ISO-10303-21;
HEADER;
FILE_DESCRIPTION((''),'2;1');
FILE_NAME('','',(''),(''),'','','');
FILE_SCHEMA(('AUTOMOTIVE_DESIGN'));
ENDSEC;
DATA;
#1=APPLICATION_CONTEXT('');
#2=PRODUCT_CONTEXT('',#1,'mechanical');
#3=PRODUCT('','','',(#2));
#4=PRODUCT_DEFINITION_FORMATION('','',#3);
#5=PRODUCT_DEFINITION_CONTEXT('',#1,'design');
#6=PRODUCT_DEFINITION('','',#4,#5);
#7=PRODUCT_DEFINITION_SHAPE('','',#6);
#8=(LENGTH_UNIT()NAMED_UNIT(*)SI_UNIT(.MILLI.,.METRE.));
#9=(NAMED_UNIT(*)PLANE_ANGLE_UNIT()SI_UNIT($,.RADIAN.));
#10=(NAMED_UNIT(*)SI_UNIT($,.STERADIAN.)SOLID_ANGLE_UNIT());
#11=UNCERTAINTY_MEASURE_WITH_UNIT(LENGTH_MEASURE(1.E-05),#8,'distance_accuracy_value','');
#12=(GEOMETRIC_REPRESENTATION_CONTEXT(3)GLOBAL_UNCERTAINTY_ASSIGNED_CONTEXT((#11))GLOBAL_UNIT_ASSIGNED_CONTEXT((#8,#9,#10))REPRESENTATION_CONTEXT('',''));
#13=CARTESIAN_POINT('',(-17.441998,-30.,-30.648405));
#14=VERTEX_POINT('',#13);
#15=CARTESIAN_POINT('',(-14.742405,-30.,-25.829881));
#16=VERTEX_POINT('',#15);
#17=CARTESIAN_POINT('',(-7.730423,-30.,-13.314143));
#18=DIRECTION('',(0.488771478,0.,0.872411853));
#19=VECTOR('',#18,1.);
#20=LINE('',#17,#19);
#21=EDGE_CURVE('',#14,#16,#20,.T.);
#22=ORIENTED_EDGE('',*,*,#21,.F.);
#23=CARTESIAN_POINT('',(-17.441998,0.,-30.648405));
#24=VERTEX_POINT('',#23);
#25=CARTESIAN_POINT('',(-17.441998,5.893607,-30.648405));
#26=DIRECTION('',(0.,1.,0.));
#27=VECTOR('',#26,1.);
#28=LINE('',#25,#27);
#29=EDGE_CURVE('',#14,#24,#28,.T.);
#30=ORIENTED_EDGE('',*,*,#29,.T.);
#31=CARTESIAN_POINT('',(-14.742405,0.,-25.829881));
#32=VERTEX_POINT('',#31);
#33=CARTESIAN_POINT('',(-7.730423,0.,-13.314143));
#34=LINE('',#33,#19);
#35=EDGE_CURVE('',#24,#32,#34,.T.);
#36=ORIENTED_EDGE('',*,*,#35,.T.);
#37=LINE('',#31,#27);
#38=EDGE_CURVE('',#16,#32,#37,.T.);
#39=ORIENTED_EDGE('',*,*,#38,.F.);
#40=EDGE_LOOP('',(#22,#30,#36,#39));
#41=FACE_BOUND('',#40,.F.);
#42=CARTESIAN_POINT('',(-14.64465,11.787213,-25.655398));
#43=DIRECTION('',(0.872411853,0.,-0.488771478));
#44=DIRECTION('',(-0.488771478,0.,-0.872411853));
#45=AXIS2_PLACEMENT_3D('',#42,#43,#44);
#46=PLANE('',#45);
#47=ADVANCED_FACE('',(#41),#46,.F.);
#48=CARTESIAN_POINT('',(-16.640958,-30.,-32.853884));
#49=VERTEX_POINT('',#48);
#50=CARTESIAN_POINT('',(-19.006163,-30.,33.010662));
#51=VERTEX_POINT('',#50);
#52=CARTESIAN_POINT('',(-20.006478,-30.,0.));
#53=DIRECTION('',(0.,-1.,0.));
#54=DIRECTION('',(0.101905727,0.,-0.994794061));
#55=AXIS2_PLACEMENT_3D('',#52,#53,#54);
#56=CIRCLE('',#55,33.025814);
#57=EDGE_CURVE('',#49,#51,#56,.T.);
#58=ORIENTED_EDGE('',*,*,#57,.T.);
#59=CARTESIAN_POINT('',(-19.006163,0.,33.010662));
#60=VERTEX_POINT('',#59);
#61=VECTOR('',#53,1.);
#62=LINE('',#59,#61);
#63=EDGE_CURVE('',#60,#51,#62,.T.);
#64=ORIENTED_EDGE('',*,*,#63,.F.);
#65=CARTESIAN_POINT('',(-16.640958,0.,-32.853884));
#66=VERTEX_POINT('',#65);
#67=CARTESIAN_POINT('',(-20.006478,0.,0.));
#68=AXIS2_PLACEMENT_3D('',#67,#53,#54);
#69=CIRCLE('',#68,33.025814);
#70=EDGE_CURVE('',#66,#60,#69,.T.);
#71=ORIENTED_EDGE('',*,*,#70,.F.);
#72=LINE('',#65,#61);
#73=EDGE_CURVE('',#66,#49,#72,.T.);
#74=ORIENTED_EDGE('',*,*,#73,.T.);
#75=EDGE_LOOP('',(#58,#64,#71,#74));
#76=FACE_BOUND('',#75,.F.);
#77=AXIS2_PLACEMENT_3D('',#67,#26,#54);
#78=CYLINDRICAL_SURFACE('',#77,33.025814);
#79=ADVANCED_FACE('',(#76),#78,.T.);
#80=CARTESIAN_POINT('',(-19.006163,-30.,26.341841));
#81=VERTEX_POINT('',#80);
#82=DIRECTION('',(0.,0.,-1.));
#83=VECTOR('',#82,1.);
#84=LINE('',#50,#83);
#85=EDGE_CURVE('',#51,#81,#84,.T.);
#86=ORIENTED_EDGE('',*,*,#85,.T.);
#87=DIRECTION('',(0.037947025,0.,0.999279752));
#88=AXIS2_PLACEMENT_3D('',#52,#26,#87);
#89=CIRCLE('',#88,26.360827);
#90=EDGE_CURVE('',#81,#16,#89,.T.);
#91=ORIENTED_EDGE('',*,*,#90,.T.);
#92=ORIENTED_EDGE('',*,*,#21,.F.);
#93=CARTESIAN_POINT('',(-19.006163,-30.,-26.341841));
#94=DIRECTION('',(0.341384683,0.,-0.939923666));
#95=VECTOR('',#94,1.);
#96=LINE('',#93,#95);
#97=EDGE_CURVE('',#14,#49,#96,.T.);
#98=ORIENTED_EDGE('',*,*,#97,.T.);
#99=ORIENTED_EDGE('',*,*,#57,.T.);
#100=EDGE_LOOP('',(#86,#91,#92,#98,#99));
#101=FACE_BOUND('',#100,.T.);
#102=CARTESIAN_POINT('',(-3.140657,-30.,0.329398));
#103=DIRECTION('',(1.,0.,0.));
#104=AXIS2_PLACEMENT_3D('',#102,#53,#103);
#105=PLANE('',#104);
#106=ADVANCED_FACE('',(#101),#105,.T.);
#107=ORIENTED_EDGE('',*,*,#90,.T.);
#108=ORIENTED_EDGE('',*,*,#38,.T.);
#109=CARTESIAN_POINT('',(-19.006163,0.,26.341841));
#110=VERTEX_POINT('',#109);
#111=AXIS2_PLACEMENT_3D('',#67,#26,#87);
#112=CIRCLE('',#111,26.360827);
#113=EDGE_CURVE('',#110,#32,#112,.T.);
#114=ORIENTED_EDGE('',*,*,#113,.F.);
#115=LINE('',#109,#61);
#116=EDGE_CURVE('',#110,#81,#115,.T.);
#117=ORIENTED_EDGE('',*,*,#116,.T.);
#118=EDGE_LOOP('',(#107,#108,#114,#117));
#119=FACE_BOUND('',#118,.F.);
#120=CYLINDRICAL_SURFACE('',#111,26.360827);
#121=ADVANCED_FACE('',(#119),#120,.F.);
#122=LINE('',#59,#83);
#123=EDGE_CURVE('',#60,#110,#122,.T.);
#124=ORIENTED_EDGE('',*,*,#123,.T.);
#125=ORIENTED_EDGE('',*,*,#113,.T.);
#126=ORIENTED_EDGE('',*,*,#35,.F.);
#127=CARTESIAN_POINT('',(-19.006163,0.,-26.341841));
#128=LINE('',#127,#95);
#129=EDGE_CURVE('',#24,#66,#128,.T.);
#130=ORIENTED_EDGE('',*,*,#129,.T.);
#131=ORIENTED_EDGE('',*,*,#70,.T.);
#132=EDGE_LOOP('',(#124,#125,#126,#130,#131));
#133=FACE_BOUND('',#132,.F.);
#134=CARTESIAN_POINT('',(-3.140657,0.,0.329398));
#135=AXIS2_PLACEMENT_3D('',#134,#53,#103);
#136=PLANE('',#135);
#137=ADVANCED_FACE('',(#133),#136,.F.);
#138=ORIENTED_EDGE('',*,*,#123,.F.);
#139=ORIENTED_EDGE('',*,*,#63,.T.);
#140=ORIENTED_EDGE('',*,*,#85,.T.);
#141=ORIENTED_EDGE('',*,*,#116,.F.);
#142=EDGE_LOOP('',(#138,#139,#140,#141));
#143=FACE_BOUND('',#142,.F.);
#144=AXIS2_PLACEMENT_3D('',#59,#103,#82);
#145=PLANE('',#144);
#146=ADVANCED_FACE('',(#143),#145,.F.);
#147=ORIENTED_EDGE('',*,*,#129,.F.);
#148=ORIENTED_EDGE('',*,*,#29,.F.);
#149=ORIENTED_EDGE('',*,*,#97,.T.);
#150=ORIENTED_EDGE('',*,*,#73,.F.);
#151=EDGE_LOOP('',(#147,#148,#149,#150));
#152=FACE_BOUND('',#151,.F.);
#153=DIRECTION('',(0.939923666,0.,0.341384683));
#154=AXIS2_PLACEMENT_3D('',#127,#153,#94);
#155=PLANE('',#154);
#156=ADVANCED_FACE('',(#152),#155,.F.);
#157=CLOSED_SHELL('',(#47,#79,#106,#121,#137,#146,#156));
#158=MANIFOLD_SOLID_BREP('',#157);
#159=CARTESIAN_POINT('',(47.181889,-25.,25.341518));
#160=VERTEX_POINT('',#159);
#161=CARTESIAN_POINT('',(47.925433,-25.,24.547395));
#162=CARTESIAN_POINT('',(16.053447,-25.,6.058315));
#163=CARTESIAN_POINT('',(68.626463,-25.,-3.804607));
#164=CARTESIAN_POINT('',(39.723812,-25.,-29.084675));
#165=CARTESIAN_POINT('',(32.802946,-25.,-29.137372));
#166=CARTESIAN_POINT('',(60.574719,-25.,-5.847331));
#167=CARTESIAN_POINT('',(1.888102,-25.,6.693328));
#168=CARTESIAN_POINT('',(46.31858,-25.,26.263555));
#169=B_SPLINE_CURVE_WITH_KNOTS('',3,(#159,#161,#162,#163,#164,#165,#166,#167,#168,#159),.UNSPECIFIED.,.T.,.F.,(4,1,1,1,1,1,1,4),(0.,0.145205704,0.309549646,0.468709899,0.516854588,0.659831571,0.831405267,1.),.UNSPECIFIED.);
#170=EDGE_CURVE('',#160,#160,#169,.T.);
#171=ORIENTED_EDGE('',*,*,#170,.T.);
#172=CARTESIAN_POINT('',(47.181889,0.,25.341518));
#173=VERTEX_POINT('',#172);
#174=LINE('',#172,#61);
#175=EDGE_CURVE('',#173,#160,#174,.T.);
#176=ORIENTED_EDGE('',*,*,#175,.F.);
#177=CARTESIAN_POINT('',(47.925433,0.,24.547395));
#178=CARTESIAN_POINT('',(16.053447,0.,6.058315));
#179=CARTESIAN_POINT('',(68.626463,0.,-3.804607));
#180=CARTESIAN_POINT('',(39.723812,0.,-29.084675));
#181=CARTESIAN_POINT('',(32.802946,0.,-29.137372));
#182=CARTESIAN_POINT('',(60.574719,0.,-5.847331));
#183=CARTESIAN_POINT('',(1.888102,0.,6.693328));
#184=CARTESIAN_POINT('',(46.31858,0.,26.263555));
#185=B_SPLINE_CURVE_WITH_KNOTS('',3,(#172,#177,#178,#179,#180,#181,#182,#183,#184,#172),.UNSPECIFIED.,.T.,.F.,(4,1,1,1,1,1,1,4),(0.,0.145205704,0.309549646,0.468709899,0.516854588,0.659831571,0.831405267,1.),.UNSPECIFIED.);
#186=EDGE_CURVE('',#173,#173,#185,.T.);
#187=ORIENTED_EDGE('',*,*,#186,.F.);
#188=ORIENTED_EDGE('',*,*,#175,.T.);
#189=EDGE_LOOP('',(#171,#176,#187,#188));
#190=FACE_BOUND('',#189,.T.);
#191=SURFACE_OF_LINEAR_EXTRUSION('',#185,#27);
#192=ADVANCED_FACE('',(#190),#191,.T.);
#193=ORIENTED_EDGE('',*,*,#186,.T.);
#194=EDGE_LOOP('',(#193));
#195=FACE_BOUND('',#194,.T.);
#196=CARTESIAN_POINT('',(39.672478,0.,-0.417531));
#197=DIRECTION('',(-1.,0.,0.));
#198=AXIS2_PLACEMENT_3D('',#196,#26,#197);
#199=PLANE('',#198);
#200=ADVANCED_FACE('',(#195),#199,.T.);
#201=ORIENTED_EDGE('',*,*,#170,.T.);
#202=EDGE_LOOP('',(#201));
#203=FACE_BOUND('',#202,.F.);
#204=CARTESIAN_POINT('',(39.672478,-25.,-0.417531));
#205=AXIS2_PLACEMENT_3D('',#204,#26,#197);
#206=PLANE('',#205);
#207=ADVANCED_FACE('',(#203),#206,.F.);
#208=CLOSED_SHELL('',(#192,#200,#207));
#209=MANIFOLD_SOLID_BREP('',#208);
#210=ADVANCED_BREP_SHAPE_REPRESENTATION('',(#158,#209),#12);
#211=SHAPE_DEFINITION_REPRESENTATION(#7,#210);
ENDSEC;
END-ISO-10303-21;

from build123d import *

# Parameters (mm, degrees)
F1_DEPTH    = 30
F3_DEPTH    = 25
F4_T1_DEPTH = 53.5744264442


# Not quite as in the source:
# - a fillet or chamfer that OpenCascade refuses, or shapes differently, is made with other operations: its cross-section is extruded or revolved along the edge and cut away or added


with BuildPart() as f1:
    # F0 (on Front) → F1 (new body)
    with BuildSketch(Plane.XZ):
        with BuildLine():
            ThreePointArc((-16.6409582285, -32.8538838982), (12.9980630113, 1.1851974836), (-19.0061628819, 33.010661602))
            Line((-19.0061628819, 33.010661602), (-19.0061628819, 26.3418406248))
            ThreePointArc((-19.0061628819, 26.3418406248), (6.3543491175, 0), (-19.0061628819, -26.3418406248))
            Line((-19.0061628819, -26.3418406248), (-16.6409582285, -32.8538838982))
        make_face()
    extrude(amount=F1_DEPTH)

    # F4: chamfer of 5 on 1 edges, made by hand

    # F4_s2 → F4_t1 (cut)
    with BuildSketch(Plane.XZ.offset(-11.7872132221)):
        with BuildLine():
            Line((-14.6446503408, -25.6553982115), (-17.5397526272, -30.822887852))
            Line((-17.5397526272, -30.822887852), (-17.6337449938, -30.8570263203))
            ThreePointArc((-17.6337449938, -30.8570263203), (-18.2957757245, -28.5906518321), (-19.1001552485, -26.3759790931))
            Line((-19.1001552485, -26.3759790931), (-19.0099575843, -26.2419126496))
            ThreePointArc((-19.0099575843, -26.2419126496), (-16.8171091828, -26.0664335828), (-14.664619643, -25.5574123606))
            Line((-14.664619643, -25.5574123606), (-14.6446503408, -25.6553982115))
        make_face()
    extrude(amount=F4_T1_DEPTH, mode=Mode.SUBTRACT)


with BuildPart() as f3:
    # F2 (on Front) → F3 (new body)
    with BuildSketch(Plane.XZ):
        with BuildLine():
            add(Edge.make_bspline(
                [(47.1818894148, 25.3415182233), (47.9254327879, 24.5473947838), (16.0534465301, 6.0583152168), (68.6264628565, -3.8046073263), (39.7238119127, -29.0846751765), (32.8029461038, -29.1373721142), (60.5747190986, -5.8473305783), (1.8881016249, 6.6933279117), (46.3185796912, 26.2635552043), (47.1818894148, 25.3415182233)],
                knots=[0, 0, 0, 0, 0.1452057039, 0.3095496455, 0.468709899, 0.5168545878, 0.6598315714, 0.8314052675, 1, 1, 1, 1], degree=3))
        make_face()
    extrude(amount=F3_DEPTH)


solid = Compound([f1.part, f3.part])
